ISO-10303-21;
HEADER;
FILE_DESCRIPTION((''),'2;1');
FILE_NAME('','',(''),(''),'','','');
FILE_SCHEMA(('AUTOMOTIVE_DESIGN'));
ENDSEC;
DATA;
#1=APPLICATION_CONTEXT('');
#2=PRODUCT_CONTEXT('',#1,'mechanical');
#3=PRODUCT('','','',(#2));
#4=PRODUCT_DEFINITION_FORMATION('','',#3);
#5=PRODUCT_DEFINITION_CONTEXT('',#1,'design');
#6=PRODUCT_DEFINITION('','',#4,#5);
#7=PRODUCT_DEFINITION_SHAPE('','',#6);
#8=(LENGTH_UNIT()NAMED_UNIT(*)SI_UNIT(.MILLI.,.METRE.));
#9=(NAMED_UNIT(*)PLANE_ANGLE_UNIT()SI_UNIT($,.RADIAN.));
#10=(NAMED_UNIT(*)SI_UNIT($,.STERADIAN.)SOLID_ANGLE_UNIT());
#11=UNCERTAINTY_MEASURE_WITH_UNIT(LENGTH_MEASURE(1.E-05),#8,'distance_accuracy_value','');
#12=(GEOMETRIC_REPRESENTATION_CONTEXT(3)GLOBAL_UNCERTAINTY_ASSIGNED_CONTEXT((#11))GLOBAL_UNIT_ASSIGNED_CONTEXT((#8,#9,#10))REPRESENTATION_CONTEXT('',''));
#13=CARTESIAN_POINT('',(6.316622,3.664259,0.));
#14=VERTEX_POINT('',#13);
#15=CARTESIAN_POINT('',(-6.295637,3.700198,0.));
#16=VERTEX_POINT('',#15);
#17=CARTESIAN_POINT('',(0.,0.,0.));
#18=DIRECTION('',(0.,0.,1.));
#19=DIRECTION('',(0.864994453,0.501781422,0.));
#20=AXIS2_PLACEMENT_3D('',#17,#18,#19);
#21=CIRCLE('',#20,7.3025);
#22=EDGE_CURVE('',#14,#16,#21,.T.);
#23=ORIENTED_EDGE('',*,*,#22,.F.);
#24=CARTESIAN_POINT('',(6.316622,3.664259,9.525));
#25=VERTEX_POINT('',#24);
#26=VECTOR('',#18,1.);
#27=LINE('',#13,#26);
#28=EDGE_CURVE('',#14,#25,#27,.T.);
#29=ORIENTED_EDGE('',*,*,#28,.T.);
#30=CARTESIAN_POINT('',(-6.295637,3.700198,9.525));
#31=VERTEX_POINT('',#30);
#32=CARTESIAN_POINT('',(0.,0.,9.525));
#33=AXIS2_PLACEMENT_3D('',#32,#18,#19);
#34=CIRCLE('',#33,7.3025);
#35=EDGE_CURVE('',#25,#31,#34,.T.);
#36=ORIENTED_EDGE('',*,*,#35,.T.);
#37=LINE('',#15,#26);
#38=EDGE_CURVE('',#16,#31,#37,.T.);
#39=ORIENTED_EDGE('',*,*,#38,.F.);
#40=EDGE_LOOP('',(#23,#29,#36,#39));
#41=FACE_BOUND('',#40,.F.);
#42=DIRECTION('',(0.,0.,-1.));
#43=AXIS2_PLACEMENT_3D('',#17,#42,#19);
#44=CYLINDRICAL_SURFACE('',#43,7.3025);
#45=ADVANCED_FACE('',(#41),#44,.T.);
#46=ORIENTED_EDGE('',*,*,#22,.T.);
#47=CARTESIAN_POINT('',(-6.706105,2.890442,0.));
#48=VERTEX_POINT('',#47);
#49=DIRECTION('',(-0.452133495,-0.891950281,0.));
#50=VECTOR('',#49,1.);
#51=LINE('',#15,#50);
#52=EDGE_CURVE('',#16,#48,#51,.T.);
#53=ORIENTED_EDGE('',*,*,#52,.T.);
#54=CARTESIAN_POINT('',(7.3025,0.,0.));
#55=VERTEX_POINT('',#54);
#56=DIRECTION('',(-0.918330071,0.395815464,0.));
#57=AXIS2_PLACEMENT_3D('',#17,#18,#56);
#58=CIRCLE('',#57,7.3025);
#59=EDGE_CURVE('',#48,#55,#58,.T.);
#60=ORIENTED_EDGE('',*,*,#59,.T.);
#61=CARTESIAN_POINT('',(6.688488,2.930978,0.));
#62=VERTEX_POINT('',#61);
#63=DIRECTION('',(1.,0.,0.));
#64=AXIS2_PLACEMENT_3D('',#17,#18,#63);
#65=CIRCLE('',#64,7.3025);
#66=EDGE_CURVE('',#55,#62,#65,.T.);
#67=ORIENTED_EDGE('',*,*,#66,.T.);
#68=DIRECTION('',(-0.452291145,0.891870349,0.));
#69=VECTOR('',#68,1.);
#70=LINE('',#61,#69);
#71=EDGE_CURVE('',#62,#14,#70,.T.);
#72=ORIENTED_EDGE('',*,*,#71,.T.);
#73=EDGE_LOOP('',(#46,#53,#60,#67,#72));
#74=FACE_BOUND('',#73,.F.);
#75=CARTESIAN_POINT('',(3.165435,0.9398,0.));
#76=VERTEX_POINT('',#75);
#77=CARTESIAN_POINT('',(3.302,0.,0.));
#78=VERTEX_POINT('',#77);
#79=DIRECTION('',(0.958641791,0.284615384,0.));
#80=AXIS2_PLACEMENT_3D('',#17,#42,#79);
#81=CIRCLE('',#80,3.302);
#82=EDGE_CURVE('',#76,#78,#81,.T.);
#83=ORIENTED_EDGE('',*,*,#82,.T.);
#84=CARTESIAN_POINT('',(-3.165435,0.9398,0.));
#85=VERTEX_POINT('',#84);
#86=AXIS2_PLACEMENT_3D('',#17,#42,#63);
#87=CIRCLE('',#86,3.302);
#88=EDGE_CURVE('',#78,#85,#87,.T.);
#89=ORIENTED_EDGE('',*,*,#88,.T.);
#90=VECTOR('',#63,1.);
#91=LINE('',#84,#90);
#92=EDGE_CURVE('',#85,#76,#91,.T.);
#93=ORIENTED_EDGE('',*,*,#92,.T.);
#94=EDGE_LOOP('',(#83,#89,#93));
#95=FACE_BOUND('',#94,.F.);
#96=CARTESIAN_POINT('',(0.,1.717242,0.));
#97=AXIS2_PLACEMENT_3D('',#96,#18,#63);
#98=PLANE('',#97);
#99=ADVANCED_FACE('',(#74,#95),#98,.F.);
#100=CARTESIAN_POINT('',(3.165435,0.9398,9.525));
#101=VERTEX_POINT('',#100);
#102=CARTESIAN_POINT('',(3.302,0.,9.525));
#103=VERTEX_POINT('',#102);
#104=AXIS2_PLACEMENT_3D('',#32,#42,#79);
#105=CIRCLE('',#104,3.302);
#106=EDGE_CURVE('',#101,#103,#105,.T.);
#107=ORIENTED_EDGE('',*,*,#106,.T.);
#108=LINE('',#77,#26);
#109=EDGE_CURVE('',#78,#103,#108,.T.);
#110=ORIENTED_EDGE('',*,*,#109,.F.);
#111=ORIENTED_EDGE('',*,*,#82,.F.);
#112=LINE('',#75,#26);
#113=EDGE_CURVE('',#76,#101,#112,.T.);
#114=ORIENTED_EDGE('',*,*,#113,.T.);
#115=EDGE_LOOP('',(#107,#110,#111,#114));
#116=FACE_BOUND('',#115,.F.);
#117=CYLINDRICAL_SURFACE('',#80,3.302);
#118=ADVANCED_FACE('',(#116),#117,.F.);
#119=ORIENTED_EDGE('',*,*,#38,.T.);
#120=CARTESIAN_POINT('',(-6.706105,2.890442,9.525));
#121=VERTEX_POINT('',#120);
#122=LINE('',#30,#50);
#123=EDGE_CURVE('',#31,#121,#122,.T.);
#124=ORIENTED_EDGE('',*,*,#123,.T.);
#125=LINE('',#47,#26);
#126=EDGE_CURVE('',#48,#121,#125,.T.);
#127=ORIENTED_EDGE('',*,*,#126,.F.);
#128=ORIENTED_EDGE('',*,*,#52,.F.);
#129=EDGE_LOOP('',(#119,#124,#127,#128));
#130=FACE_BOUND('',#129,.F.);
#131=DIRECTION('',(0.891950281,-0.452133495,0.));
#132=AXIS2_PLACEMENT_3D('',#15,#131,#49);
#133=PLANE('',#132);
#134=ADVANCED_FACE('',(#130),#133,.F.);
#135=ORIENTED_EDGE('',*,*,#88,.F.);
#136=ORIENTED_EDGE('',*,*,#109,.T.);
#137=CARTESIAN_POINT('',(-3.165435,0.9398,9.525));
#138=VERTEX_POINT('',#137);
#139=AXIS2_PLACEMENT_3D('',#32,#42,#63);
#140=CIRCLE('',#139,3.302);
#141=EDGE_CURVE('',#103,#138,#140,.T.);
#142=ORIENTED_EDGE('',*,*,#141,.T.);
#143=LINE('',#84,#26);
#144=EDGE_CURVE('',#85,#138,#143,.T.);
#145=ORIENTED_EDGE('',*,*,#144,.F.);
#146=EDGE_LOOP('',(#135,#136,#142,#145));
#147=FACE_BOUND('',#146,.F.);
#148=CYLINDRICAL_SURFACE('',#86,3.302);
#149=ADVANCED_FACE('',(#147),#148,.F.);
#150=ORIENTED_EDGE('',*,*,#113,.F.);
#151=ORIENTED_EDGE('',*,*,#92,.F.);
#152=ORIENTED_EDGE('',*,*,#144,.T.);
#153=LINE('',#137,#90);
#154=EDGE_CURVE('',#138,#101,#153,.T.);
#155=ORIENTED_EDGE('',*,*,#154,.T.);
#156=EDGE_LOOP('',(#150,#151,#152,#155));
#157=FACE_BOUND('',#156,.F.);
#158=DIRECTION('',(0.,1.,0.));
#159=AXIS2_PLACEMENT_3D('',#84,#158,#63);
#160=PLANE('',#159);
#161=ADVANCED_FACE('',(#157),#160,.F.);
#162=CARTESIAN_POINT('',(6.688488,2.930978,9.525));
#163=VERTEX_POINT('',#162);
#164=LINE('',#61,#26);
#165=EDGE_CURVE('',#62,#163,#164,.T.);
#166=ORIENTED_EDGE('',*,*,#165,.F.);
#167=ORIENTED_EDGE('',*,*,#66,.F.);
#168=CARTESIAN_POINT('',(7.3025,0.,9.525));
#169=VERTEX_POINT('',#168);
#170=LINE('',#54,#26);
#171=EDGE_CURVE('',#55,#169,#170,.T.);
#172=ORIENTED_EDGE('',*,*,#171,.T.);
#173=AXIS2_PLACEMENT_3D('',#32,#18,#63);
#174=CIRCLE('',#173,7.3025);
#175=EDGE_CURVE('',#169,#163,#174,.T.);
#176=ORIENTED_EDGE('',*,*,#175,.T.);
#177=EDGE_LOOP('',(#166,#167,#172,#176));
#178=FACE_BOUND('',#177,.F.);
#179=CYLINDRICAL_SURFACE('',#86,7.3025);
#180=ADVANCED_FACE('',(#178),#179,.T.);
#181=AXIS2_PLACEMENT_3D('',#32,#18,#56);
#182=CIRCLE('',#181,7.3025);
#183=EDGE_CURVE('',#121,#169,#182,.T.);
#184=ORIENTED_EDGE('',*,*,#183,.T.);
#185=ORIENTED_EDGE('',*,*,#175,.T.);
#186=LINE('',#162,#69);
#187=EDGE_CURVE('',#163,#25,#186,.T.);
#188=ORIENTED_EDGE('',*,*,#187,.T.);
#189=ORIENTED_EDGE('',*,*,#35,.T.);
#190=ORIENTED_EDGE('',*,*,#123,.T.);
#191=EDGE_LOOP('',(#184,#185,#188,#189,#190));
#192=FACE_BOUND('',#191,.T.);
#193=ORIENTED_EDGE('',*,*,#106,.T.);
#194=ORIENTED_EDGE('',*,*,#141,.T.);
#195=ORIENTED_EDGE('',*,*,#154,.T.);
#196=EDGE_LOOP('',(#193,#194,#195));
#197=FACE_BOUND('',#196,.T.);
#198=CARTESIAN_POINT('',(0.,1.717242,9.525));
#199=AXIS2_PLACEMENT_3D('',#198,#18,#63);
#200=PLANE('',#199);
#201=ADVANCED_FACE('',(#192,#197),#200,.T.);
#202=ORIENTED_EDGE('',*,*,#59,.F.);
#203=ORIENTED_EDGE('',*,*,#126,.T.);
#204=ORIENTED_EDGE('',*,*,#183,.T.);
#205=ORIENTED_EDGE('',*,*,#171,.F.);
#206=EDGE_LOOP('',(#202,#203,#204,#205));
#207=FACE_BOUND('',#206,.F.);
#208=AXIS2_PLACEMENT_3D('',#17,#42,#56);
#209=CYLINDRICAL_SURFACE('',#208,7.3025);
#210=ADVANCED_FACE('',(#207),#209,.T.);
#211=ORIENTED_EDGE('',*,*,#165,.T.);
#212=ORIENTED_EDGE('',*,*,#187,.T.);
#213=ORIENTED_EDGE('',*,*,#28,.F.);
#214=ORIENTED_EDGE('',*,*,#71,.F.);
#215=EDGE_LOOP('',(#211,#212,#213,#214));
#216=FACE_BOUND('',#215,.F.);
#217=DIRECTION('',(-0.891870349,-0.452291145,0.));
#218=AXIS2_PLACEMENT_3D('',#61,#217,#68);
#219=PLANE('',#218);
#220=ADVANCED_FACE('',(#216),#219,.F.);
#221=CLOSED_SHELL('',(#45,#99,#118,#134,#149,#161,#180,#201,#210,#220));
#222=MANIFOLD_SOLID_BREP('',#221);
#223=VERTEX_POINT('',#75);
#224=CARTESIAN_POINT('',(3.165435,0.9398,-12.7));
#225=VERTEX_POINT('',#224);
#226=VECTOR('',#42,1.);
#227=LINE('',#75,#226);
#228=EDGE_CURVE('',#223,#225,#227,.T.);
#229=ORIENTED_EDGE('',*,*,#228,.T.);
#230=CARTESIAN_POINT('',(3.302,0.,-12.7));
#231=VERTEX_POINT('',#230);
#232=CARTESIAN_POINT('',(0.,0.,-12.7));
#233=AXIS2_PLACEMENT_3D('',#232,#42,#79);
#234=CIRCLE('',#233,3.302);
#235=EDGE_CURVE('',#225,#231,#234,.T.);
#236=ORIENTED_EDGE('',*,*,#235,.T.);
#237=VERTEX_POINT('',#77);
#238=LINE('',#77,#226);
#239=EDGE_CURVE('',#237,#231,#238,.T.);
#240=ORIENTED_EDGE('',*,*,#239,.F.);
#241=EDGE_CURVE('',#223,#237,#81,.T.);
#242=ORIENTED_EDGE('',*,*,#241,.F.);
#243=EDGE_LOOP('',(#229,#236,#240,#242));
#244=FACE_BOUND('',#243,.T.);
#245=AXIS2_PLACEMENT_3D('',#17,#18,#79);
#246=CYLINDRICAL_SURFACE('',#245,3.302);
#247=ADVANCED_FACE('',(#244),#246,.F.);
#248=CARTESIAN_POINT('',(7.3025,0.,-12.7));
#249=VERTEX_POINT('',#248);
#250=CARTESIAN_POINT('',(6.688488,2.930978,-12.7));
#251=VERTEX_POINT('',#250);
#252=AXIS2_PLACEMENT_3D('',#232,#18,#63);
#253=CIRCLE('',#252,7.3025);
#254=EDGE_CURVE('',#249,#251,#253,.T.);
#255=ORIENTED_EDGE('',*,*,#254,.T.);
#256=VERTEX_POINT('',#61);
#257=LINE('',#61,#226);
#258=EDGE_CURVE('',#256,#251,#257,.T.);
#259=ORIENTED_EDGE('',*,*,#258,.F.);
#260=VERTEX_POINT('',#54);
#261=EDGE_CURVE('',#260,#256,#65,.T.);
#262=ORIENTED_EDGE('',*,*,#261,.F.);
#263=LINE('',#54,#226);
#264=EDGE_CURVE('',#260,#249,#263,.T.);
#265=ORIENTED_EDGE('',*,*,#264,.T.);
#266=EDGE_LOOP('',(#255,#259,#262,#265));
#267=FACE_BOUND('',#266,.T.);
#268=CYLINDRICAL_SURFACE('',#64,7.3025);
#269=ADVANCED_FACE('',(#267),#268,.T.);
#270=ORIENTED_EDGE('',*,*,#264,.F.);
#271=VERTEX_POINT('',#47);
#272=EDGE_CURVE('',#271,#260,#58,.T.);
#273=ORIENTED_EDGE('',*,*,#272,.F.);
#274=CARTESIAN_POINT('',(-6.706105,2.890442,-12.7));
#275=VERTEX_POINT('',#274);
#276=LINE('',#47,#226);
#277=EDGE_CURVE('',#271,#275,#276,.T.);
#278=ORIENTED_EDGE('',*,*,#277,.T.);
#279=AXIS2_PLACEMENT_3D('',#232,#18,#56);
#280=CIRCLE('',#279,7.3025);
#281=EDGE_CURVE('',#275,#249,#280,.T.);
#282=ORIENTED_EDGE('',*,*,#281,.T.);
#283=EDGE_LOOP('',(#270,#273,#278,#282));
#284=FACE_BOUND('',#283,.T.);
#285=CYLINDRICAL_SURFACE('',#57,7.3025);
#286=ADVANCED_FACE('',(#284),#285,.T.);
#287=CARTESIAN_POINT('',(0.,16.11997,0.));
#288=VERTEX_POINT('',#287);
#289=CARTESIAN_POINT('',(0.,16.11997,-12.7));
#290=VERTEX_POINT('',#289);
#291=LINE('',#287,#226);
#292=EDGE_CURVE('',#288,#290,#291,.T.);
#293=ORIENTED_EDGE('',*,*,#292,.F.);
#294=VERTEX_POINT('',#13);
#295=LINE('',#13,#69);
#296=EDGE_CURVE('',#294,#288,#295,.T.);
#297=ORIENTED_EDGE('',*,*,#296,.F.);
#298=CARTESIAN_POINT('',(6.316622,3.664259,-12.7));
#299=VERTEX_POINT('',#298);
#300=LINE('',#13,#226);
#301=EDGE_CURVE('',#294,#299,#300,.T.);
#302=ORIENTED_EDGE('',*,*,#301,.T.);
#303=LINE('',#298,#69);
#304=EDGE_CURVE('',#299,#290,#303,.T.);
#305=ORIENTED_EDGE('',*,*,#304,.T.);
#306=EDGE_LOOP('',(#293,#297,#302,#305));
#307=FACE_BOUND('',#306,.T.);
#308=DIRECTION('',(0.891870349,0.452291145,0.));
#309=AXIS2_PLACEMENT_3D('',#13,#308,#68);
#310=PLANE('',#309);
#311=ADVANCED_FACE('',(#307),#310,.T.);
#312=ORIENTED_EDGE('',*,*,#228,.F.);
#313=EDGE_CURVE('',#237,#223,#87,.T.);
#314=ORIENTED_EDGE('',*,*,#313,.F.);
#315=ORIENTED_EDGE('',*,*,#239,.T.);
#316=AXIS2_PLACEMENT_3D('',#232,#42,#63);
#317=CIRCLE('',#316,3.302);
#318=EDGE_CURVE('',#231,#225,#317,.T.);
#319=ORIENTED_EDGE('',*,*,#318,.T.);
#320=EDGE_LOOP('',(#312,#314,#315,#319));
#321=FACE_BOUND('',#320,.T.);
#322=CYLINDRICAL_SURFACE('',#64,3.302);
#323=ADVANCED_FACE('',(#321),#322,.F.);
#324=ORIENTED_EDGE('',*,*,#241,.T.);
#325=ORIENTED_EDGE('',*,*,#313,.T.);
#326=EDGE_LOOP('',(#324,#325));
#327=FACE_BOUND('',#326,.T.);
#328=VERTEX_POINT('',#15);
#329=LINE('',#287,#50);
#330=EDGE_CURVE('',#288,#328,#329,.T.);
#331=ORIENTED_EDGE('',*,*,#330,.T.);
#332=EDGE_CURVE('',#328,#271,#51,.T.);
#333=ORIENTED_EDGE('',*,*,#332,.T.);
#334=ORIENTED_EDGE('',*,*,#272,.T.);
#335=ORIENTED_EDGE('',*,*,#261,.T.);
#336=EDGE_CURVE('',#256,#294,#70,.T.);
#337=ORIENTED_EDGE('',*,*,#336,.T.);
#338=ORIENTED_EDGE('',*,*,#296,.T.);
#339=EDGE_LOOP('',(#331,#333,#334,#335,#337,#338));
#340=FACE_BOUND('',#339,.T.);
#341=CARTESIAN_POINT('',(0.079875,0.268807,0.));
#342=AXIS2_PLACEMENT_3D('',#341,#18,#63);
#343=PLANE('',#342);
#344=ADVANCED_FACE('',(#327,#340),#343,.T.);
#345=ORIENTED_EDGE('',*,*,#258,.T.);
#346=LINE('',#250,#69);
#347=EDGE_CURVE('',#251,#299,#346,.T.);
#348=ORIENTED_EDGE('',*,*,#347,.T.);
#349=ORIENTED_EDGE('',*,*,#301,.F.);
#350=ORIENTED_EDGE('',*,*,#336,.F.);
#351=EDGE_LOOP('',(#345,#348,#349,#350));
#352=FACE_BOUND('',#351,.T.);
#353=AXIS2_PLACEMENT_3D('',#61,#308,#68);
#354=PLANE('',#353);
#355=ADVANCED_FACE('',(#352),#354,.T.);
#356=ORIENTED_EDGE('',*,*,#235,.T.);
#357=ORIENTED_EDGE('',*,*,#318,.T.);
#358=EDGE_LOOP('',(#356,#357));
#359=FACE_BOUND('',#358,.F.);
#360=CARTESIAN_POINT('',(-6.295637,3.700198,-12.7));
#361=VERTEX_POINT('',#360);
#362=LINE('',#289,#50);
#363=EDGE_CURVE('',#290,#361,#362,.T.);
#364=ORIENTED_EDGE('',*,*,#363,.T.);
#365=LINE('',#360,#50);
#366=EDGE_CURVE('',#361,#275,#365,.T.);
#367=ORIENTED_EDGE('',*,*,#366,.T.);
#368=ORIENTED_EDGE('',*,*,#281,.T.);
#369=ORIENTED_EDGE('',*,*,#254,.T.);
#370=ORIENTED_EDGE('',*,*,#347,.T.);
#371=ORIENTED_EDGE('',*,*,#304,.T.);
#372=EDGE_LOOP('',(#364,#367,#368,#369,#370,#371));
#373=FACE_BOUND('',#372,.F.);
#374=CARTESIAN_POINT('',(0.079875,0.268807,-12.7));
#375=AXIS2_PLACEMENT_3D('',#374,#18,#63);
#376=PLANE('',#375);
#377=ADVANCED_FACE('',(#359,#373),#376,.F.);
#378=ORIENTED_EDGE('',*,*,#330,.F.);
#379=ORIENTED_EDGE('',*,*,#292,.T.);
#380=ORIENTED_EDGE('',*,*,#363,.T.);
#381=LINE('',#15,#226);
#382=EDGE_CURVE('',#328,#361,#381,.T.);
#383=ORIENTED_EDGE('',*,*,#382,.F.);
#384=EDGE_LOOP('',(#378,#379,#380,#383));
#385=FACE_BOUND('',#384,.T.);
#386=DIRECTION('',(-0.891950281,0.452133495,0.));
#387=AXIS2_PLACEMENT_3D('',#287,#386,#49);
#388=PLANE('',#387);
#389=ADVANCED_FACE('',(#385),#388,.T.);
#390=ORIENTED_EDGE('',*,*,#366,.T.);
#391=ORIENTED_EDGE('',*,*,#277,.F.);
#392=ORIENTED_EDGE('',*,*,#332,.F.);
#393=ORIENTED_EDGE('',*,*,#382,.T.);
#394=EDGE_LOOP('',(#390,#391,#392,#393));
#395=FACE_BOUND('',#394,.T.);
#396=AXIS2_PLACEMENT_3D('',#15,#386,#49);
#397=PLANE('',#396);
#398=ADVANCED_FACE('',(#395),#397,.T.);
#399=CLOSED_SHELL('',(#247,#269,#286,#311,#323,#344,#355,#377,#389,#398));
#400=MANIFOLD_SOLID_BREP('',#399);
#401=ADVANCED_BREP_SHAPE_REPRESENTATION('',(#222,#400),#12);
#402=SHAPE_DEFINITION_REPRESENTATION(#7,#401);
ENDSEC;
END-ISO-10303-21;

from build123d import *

# Parameters (mm, degrees)
F1_DEPTH = 9.525
F2_DEPTH = 12.7
F3_DEPTH = 9.525


# Not quite as in the source:
# - a feature names something its author has since deleted; it is built from what else it names
# - the program builds the solid bodies; features that only make, move or delete a surface that nothing else refers to are left out


with BuildPart() as f1:
    # F0 (on Top) → F1 (new body)
    with BuildSketch(Plane.XY):
        with BuildLine():
            ThreePointArc((-6.7061053414, 2.890442423), (-1.4756645952, -7.1518473315), (7.3025, 0))
            ThreePointArc((7.3025, 0), (7.1473488528, 1.4973011139), (6.6884881888, 2.9309779936))
            Line((6.6884881888, 2.9309779936), (6.3166219962, 3.6642588347))
            ThreePointArc((6.3166219962, 3.6642588347), (0.0208084361, 7.3024703532), (-6.2956369305, 3.7001975474))
            Line((-6.2956369305, 3.7001975474), (-6.7061053414, 2.890442423))
        make_face()
        with BuildLine():
            ThreePointArc((3.1654351928, 0.9398), (3.2676804469, 0.474835231), (3.302, 0))
            ThreePointArc((3.302, 0), (-0.474835231, -3.2676804469), (-3.1654351928, 0.9398))
            ThreePointArc((-3.1654351928, 0.9398), (0, 3.302), (3.1654351928, 0.9398))
        make_face(mode=Mode.SUBTRACT)
    extrude(amount=F1_DEPTH)

    # F0 (on Top) → F3 (join, through all)
    with BuildSketch(Plane.XY):
        with BuildLine():
            Line((-3.1654351928, 0.9398), (3.1654351928, 0.9398))
            ThreePointArc((3.1654351928, 0.9398), (0, 3.302), (-3.1654351928, 0.9398))
        make_face()
    extrude(amount=F3_DEPTH)


with BuildPart() as f2:
    # F0 (on Top) → F2 (new body)
    with BuildSketch(Plane.XY):
        with BuildLine():
            ThreePointArc((-6.7061053414, 2.890442423), (-1.4756645952, -7.1518473315), (7.3025, 0))
            ThreePointArc((7.3025, 0), (7.1473488528, 1.4973011139), (6.6884881888, 2.9309779936))
            Line((6.6884881888, 2.9309779936), (6.3166219962, 3.6642588347))
            ThreePointArc((6.3166219962, 3.6642588347), (0.0208084361, 7.3024703532), (-6.2956369305, 3.7001975474))
            Line((-6.2956369305, 3.7001975474), (-6.7061053414, 2.890442423))
        make_face()
        with BuildLine():
            ThreePointArc((3.1654351928, 0.9398), (3.2676804469, 0.474835231), (3.302, 0))
            ThreePointArc((3.302, 0), (-0.474835231, -3.2676804469), (-3.1654351928, 0.9398))
            ThreePointArc((-3.1654351928, 0.9398), (0, 3.302), (3.1654351928, 0.9398))
        make_face(mode=Mode.SUBTRACT)
        with BuildLine():
            ThreePointArc((-6.2956369305, 3.7001975474), (0.0208084361, 7.3024703532), (6.3166219962, 3.6642588347))
            Line((6.3166219962, 3.6642588347), (0, 16.1199700087))
            Line((0, 16.1199700087), (-6.2956369305, 3.7001975474))
        make_face()
    extrude(amount=-F2_DEPTH)


solid = Compound([f1.part, f2.part])
